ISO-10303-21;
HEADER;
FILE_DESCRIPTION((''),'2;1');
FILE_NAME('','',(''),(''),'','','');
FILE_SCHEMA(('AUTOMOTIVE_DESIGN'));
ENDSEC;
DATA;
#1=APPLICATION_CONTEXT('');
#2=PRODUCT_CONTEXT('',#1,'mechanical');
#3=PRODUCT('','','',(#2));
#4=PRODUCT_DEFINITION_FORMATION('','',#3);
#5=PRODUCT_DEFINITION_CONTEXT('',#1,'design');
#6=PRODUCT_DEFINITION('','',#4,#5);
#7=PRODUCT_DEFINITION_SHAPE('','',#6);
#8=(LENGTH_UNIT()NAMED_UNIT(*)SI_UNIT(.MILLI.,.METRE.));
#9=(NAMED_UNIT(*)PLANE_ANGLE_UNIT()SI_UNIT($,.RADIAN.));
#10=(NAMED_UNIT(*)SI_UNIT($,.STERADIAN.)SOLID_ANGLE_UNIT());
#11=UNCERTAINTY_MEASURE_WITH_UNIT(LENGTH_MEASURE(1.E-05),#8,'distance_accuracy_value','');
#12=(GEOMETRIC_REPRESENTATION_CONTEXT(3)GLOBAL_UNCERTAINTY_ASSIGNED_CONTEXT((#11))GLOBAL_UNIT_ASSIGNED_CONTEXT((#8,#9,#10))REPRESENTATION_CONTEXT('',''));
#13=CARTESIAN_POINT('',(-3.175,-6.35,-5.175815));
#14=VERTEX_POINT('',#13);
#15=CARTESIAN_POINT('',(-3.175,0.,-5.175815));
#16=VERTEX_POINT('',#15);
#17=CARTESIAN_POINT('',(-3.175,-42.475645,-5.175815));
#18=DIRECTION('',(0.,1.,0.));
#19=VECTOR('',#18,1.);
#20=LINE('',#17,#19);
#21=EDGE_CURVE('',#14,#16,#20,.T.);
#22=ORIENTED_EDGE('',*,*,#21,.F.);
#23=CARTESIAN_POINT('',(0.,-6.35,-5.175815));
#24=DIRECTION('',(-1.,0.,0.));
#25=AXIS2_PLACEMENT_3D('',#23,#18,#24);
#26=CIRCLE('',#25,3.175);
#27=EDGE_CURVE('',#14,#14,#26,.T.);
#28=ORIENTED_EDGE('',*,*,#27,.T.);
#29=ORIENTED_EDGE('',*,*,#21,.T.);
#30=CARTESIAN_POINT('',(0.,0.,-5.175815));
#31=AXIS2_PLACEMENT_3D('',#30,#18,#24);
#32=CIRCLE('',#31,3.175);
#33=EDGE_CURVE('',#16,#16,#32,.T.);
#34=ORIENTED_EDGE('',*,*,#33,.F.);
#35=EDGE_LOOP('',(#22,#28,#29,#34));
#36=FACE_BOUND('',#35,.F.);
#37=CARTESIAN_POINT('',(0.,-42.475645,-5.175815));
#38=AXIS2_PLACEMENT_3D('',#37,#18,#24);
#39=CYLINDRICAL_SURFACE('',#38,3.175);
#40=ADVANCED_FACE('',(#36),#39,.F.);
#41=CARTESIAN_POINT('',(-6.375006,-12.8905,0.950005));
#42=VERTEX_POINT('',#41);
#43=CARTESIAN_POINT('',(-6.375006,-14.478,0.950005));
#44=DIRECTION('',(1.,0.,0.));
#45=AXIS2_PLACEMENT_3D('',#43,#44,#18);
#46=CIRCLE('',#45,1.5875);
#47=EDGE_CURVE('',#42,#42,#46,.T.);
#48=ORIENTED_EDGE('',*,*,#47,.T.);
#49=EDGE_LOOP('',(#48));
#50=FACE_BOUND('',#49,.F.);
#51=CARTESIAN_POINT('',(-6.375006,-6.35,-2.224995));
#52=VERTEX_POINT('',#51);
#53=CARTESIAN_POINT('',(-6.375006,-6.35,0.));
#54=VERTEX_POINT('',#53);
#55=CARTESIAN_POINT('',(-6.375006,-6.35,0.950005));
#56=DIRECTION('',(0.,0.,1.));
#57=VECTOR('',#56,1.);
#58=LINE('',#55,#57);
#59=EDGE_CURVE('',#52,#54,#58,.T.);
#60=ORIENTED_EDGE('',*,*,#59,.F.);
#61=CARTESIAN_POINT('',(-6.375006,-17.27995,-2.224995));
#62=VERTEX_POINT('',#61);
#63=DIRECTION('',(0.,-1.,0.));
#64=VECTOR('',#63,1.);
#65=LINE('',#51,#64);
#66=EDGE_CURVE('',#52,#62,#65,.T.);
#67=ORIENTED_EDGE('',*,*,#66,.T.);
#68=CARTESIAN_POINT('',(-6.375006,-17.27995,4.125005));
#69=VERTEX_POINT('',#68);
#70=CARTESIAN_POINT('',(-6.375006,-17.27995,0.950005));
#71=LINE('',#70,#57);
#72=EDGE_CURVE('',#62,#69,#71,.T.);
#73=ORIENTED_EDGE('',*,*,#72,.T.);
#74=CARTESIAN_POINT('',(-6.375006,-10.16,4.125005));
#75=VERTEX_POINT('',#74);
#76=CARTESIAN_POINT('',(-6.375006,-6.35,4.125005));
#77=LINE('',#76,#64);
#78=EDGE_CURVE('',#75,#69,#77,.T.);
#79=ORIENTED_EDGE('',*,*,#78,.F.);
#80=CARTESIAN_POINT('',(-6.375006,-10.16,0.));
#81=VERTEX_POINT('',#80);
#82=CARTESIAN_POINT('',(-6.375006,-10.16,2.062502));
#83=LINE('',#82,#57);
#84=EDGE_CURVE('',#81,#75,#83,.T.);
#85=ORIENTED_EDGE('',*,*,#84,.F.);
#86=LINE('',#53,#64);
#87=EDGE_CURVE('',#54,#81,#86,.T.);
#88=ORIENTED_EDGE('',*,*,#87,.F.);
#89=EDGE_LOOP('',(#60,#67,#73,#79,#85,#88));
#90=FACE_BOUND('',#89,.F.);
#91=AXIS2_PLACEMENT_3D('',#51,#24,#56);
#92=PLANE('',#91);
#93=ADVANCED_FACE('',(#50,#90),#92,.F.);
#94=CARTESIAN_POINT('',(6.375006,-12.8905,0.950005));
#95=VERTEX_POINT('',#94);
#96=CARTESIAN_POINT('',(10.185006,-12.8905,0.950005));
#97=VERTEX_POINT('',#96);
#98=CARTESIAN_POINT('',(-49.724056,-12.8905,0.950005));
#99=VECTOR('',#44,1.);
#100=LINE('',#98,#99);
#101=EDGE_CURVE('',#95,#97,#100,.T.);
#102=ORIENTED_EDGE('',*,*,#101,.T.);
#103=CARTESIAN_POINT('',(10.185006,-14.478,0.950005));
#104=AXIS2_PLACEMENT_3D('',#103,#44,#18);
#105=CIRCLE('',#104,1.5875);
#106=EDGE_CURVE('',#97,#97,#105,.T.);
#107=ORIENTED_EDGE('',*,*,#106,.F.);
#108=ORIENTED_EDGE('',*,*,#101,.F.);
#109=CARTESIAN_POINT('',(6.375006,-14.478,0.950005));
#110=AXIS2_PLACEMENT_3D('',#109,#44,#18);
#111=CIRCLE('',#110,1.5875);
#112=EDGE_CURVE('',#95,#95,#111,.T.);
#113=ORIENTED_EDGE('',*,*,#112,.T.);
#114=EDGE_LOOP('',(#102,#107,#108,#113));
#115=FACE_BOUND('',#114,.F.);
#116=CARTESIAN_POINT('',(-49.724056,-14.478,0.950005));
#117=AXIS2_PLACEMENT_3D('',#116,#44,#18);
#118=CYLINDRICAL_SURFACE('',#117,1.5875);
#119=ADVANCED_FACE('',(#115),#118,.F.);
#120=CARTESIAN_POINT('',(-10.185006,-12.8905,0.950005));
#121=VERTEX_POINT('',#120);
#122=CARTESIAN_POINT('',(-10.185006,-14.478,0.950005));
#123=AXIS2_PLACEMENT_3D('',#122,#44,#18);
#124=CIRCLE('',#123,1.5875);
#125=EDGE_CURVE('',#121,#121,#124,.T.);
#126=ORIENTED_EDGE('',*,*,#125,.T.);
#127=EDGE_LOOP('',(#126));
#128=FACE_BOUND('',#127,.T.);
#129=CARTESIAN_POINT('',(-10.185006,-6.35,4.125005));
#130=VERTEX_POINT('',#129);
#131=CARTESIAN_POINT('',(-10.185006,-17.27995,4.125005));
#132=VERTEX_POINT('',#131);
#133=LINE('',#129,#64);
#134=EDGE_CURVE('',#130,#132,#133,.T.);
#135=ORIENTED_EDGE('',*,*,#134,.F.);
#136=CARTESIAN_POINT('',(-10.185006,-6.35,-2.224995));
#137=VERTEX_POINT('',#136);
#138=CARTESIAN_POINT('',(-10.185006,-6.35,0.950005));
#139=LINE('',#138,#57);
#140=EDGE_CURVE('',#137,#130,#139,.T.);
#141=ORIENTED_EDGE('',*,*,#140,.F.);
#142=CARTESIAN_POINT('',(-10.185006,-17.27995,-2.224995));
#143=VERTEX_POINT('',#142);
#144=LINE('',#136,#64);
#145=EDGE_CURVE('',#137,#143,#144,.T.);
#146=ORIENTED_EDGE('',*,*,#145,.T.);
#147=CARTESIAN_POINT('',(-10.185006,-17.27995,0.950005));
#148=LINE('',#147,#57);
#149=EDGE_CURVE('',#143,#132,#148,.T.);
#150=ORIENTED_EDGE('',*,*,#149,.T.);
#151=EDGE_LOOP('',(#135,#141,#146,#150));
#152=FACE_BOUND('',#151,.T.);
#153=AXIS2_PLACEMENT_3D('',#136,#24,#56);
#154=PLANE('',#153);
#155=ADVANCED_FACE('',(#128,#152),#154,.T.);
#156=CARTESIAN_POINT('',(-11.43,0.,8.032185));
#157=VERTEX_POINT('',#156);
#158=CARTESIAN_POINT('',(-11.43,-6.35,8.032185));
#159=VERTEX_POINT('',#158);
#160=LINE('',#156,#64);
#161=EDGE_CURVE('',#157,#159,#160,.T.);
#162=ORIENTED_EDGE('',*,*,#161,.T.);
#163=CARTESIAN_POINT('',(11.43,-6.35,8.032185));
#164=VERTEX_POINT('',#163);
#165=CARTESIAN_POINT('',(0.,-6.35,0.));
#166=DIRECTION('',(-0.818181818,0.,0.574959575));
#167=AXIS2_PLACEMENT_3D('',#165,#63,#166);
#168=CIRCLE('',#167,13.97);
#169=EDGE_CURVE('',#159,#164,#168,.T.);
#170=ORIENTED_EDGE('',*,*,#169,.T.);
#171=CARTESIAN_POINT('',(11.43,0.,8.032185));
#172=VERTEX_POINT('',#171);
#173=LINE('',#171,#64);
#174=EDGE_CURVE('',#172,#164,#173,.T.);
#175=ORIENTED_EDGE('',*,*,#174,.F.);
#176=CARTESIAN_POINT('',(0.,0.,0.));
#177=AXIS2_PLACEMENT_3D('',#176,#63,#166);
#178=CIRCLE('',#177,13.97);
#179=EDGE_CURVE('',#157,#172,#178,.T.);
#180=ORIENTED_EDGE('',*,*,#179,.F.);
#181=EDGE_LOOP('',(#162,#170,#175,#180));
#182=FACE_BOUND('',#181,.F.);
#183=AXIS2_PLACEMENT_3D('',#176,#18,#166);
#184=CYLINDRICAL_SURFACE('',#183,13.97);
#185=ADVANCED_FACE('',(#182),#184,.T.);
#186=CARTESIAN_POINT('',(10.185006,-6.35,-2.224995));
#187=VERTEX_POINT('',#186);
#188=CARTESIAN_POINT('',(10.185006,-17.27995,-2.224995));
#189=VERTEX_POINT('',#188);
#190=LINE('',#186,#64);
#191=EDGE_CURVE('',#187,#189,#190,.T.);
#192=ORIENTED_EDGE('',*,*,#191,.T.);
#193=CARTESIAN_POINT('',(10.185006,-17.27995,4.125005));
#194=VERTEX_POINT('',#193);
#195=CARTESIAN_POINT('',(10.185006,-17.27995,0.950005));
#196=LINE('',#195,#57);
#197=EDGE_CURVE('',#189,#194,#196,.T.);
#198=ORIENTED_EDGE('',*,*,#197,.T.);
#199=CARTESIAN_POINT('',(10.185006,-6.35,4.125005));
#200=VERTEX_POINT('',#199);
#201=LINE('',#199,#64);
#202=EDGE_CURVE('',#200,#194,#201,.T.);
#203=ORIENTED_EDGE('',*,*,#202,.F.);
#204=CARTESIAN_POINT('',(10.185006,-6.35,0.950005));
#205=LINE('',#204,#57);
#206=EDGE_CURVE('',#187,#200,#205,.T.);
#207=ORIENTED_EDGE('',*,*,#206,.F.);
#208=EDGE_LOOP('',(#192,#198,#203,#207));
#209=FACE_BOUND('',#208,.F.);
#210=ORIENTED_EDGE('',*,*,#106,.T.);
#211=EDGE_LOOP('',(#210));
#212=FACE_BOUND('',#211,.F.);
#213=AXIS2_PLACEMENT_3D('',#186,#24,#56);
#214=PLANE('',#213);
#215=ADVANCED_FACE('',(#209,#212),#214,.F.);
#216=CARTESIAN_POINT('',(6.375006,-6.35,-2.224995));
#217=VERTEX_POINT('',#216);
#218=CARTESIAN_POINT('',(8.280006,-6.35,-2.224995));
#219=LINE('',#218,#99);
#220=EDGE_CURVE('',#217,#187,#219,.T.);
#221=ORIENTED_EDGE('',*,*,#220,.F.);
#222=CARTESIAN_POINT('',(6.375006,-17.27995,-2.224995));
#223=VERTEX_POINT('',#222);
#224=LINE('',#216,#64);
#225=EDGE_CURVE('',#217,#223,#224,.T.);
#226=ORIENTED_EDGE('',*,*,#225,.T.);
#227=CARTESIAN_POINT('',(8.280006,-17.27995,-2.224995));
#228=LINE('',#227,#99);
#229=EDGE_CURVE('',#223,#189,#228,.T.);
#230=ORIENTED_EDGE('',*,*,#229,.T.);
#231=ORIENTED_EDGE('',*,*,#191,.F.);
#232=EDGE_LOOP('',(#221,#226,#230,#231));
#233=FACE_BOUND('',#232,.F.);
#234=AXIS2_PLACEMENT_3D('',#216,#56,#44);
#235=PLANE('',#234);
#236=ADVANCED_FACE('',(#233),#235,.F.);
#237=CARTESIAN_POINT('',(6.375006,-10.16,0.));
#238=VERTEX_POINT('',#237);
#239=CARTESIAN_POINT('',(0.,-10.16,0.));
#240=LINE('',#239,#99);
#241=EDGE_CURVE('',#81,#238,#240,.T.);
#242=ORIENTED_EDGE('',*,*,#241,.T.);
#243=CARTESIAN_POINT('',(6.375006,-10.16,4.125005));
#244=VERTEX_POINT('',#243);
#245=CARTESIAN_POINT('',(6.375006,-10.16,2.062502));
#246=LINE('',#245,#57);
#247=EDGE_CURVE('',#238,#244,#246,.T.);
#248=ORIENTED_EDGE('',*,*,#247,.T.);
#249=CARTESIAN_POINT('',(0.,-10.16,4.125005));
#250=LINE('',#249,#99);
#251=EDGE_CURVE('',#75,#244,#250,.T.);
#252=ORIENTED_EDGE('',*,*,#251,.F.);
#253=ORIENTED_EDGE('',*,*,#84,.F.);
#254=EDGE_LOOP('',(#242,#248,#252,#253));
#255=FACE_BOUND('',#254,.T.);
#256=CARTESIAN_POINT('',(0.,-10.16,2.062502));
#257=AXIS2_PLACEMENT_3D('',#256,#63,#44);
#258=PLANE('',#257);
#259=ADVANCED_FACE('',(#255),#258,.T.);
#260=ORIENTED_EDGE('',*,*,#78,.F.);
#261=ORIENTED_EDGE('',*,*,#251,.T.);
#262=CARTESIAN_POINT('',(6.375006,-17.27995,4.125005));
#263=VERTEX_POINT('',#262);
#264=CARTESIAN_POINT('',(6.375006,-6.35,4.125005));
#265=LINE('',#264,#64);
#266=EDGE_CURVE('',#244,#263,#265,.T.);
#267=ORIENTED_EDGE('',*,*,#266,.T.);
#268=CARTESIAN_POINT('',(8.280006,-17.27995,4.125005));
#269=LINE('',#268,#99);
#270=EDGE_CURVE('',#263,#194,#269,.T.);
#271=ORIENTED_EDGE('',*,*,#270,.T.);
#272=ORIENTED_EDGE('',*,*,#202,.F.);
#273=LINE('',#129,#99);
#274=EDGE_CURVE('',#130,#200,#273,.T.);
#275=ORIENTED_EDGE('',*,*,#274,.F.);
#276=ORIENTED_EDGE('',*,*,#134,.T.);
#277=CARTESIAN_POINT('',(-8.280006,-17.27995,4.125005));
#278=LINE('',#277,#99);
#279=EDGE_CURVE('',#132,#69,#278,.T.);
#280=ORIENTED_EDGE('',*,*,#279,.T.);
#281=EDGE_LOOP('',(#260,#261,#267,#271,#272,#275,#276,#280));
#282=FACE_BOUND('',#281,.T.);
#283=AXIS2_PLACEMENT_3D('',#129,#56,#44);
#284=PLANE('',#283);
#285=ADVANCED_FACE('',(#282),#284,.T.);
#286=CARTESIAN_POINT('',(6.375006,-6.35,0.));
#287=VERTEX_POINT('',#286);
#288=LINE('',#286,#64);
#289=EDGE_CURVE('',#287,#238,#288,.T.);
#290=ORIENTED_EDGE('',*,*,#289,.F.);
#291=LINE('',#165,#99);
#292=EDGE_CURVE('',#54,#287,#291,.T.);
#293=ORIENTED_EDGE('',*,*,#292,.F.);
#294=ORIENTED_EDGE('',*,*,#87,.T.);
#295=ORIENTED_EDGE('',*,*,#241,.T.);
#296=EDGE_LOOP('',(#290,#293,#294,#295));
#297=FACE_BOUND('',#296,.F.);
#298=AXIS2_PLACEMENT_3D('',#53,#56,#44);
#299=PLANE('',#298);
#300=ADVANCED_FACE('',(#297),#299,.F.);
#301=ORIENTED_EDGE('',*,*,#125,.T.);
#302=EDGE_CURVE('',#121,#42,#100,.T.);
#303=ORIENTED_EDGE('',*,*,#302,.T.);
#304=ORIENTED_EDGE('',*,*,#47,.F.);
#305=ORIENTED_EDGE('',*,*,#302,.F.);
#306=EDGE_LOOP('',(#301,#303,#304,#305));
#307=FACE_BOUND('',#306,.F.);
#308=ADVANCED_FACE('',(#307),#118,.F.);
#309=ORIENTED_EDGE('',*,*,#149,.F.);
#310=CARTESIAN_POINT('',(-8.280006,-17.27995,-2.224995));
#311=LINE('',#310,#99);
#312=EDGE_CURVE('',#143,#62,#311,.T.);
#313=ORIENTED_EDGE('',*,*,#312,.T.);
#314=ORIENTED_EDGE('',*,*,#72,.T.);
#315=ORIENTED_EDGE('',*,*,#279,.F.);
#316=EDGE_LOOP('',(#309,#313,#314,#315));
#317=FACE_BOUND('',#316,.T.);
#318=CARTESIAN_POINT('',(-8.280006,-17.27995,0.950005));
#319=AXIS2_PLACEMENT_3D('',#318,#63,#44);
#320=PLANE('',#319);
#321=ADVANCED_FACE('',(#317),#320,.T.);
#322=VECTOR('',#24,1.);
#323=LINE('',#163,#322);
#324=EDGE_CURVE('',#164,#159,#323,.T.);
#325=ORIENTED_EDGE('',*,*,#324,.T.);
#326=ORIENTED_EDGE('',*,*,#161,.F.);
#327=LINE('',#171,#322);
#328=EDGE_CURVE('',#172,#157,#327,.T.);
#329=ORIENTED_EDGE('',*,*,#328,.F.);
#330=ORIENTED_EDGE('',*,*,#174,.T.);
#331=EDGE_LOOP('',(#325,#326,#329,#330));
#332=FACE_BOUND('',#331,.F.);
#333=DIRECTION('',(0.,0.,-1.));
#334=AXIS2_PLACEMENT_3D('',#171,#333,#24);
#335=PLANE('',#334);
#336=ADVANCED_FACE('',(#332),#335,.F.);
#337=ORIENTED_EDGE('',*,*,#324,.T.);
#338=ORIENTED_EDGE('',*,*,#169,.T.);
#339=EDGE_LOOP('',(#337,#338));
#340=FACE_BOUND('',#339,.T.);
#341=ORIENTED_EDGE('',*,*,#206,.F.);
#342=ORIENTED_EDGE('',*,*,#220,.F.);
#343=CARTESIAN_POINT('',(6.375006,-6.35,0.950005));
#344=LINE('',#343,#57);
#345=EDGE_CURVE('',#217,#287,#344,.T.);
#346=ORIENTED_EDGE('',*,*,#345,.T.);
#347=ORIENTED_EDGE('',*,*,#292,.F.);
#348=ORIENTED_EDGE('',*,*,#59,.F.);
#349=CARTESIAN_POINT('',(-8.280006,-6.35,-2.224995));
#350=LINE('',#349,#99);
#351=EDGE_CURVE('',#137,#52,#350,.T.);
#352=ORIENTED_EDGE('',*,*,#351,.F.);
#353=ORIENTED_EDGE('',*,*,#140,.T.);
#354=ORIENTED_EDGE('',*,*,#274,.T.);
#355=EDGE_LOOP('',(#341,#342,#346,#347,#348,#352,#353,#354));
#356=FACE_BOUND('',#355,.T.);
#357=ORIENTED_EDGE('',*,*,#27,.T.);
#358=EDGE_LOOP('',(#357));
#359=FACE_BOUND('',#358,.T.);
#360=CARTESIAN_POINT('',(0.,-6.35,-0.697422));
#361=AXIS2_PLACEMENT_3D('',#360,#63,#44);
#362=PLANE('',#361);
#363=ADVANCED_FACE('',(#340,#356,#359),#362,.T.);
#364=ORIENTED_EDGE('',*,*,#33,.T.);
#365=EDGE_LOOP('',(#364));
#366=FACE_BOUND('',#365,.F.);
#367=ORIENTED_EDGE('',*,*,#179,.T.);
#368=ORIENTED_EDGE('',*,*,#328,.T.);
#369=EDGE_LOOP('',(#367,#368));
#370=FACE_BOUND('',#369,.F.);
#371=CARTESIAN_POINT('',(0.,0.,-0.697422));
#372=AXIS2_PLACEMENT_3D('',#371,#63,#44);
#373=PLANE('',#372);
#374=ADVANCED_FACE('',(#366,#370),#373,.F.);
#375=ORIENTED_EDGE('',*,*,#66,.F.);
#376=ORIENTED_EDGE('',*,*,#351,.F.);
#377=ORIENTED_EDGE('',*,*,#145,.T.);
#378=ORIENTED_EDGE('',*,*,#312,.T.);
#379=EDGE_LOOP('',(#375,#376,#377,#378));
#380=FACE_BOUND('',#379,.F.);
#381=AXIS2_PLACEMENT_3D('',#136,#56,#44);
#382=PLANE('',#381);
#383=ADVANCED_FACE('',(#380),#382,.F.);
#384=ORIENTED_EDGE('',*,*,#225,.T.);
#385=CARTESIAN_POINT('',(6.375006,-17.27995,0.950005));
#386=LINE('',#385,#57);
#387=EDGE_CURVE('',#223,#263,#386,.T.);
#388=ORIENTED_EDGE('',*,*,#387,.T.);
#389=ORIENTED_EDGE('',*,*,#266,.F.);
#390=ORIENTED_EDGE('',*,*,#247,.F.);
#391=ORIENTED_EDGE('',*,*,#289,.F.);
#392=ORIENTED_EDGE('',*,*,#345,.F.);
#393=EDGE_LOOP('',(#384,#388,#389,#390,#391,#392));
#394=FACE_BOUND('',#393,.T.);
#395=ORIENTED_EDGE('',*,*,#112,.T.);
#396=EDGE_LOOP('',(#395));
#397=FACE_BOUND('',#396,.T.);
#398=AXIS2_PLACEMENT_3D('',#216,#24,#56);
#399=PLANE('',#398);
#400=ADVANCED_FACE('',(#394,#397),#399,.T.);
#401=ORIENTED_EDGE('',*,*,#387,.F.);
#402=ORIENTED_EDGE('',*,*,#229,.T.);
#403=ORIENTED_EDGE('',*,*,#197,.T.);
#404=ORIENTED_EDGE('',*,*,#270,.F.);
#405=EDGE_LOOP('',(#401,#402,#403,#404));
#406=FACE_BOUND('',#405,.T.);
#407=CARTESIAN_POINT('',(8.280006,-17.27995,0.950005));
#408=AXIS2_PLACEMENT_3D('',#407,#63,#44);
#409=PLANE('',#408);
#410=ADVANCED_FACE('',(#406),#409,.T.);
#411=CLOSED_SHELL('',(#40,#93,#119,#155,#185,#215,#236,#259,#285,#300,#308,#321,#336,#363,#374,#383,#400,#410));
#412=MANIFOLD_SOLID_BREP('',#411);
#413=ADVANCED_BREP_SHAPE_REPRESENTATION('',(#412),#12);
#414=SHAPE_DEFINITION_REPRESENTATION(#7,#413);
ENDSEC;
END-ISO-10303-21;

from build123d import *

# Parameters (mm, degrees)
F1_DEPTH = 6.35
F3_D     = 6.35
F2_W     = 3.81
F2_H     = 6.35
F4_DEPTH = 10.9299502
F6_D     = 3.175
F7_W     = 12.7500126
F7_H     = 4.1250048568
F8_DEPTH = 3.81


# Not quite as in the source:
# - a feature names something its author has since deleted; it is built from what else it names


with BuildPart() as f1:
    # F0 (on Front) → F1 (new body)
    with BuildSketch(Plane.XZ):
        with BuildLine():
            Line((11.43, 8.0321852568), (-11.43, 8.0321852568))
            ThreePointArc((-11.43, 8.0321852568), (0, -13.97), (11.43, 8.0321852568))
        make_face()
    extrude(amount=F1_DEPTH)

    # F3 (through all)
    with Locations(Plane.XZ.offset(6.35)):
        with Locations((0, -5.1758147432)):
            Hole(F3_D / 2)

    # F2 (on face) → F4 (join)
    with BuildSketch(Plane.XZ.offset(6.35)):
        with Locations((-8.2800063, 0.9500048568)):
            Rectangle(F2_W, F2_H)
        with Locations((8.2800063, 0.9500048568)):
            Rectangle(F2_W, F2_H)
    extrude(amount=F4_DEPTH)

    # F6 (through all)
    with Locations(Plane(origin=(-10.1850063, 0, 0), x_dir=(0, -1, 0), z_dir=(-1, 0, 0))):
        with Locations((14.478, 0.9500048568)):
            Hole(F6_D / 2)

    # F7 (on face) → F8 (join)
    with BuildSketch(Plane.XZ.offset(6.35)):
        with Locations((0, 2.0625024284)):
            Rectangle(F7_W, F7_H)
    extrude(amount=F8_DEPTH)


solid = f1.part
